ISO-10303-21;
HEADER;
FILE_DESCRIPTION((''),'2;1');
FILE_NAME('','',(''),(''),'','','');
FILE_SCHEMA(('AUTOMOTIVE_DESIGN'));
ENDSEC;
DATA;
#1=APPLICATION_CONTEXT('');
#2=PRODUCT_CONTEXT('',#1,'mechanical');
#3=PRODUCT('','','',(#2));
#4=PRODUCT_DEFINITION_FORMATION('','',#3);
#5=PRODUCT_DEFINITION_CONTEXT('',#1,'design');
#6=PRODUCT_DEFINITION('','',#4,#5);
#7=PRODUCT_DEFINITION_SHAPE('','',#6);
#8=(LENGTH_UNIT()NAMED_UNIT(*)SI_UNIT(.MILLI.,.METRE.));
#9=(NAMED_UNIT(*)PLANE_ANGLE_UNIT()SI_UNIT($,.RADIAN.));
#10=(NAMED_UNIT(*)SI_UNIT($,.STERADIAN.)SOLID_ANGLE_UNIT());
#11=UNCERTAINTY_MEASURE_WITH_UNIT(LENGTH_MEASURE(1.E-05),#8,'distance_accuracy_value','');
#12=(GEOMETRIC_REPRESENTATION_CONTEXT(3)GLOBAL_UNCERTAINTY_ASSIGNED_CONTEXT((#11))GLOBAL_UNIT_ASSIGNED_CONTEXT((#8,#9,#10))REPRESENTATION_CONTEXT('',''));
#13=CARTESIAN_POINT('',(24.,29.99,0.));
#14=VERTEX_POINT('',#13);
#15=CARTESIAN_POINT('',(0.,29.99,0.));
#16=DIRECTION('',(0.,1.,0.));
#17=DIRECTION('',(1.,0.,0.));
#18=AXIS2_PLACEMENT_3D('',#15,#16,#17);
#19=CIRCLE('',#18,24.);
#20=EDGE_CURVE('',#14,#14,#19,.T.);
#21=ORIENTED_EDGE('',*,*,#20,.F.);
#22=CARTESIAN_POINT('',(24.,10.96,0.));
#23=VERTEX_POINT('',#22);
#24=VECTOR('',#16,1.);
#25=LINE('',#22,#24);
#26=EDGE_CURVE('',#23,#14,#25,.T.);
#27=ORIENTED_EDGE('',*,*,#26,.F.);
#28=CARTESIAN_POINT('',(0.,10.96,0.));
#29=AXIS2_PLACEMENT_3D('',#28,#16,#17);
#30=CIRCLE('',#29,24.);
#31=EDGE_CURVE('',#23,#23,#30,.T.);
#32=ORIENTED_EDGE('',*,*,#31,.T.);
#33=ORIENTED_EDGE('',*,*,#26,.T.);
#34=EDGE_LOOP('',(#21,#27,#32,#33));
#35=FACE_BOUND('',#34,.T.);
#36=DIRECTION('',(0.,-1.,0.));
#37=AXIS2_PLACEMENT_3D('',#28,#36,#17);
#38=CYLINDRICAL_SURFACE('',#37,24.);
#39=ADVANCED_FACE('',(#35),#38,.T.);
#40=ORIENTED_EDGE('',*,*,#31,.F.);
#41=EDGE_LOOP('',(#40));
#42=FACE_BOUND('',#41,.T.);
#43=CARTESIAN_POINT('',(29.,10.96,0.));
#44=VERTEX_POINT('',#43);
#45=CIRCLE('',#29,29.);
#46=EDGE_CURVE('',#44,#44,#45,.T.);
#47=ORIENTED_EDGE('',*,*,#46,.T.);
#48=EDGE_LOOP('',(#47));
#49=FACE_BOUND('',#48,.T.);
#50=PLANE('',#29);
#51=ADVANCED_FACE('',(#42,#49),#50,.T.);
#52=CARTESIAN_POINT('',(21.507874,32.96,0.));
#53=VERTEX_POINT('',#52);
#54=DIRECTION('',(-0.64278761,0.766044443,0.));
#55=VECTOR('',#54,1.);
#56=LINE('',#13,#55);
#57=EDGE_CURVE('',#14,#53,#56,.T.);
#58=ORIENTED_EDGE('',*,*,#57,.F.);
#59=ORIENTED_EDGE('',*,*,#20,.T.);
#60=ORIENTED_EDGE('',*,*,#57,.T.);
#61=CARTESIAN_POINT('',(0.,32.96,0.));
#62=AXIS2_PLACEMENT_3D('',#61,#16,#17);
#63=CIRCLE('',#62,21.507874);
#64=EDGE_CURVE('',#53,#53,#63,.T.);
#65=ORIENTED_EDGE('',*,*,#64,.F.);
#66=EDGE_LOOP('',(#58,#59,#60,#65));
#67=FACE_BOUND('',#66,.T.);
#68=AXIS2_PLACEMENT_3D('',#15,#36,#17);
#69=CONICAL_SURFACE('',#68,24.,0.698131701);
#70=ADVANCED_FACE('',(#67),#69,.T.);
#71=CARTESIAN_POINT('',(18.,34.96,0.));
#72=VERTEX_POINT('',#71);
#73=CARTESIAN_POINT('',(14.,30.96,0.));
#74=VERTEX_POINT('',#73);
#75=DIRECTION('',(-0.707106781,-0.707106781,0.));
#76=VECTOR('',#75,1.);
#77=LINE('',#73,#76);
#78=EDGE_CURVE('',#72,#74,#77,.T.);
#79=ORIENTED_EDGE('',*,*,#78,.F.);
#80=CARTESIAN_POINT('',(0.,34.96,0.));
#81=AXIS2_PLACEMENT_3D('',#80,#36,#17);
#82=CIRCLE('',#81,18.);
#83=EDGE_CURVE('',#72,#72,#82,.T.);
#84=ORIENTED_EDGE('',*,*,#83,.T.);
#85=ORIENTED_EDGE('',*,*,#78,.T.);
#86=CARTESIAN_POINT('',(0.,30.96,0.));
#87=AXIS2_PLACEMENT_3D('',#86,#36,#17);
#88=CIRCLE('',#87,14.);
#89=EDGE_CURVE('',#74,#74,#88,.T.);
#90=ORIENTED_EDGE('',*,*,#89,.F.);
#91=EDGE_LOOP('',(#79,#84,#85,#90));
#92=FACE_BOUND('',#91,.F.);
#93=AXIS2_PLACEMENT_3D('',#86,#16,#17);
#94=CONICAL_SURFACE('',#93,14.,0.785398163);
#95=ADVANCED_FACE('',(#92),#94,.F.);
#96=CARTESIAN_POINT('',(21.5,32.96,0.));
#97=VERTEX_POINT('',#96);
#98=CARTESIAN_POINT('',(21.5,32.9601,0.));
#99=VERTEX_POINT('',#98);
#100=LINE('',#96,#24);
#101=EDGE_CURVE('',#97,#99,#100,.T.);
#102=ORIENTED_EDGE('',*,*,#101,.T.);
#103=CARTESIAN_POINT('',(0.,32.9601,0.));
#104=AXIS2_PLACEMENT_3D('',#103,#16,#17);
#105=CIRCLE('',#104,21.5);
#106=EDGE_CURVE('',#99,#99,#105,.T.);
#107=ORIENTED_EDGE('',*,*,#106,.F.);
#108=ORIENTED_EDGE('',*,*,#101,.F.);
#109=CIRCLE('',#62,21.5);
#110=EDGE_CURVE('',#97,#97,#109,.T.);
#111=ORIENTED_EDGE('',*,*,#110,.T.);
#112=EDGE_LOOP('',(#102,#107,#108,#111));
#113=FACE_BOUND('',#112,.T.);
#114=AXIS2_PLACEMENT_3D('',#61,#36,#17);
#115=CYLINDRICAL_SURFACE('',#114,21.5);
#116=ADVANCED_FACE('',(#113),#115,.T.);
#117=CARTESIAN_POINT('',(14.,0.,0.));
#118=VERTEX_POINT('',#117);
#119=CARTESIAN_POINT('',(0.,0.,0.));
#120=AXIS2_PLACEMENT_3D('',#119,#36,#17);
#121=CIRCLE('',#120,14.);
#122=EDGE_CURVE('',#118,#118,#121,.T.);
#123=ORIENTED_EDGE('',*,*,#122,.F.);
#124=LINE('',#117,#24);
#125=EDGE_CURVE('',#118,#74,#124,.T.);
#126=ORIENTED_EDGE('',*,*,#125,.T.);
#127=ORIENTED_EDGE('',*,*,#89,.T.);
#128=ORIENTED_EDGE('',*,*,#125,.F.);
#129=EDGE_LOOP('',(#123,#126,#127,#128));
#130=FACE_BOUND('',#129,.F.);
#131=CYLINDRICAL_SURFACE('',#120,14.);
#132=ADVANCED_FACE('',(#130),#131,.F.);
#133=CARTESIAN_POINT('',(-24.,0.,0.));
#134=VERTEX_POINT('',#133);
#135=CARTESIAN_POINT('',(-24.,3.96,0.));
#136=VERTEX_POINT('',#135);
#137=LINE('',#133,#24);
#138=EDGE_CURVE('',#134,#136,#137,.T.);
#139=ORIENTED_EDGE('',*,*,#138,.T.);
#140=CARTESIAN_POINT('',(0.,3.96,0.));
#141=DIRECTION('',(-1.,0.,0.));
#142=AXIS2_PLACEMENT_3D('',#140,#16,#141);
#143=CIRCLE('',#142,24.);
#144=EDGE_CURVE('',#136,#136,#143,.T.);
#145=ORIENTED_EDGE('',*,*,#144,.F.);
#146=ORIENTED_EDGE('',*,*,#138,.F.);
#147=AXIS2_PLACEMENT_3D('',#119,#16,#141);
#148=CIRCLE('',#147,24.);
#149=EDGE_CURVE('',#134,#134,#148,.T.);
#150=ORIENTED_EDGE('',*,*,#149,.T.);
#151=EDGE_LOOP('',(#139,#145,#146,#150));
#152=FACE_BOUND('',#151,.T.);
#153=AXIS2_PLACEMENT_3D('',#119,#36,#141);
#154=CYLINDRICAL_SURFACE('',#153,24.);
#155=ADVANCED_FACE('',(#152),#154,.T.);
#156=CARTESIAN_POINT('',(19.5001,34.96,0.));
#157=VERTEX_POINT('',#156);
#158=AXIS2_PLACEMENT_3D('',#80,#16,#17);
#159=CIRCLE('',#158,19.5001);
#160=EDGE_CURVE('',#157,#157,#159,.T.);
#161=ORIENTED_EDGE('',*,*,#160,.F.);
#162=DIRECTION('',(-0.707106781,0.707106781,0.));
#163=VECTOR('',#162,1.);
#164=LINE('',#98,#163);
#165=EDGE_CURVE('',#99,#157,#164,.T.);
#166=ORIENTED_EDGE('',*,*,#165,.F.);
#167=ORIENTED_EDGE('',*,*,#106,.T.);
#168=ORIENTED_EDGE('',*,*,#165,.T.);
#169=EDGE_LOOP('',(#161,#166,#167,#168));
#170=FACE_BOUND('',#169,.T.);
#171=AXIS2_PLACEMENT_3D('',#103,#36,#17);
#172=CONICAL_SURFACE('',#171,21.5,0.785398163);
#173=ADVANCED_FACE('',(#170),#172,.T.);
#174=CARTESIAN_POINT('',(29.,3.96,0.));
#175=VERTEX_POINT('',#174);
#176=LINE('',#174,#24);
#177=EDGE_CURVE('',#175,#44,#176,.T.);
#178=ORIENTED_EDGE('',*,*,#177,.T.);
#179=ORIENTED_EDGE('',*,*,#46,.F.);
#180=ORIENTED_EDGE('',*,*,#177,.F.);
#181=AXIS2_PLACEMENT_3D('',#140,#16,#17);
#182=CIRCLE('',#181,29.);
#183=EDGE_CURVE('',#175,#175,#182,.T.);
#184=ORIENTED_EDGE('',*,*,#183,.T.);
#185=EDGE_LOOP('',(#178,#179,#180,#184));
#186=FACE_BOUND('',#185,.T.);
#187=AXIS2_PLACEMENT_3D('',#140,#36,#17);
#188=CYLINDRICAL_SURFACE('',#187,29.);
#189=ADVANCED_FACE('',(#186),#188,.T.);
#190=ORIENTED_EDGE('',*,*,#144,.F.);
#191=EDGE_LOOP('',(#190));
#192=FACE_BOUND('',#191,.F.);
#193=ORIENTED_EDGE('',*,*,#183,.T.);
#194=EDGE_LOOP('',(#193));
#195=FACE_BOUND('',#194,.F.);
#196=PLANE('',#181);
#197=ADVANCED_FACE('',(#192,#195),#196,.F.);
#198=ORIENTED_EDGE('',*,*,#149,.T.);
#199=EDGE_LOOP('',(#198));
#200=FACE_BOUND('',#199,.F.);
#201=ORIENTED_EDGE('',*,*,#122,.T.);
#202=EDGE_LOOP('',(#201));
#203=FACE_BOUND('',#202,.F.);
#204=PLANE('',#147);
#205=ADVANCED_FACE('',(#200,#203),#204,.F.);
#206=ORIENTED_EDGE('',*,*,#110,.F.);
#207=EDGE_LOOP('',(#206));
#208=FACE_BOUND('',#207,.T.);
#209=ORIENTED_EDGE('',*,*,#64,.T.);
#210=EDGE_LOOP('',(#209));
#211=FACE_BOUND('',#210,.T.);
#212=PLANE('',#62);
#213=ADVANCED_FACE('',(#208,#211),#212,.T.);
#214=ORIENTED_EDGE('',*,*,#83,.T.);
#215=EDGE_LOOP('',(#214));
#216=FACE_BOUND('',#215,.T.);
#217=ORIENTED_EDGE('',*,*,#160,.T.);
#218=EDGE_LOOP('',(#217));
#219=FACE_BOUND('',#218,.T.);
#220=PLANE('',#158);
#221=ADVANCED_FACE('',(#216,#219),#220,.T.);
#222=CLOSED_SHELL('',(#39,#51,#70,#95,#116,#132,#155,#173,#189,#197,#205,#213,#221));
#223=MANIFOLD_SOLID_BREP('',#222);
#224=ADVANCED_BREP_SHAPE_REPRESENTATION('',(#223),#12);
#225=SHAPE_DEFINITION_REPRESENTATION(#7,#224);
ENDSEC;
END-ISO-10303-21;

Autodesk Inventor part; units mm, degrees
ref_plane "YZ Plane" through (0, 0, 0) normal (1, 0, 0) x (0, 1, 0)
ref_plane "XZ Plane" through (0, 0, 0) normal (0, 1, 0) x (-1, 0, 0)
ref_plane "XY Plane" through (0, 0, 0) normal (0, 0, 1) x (1, 0, 0)
sketch "Sketch1" plane through (0, 0, 0) normal (0, 1, 0) x (-1, 0, 0)
  circle A0 centre (0, 0) radius 24
  dimension "d0" = 48
extrude "Extrusion1" add sketch "Sketch1" along normal blind 3.96
sketch "Sketch2" plane through (0, 3.96, 0) normal (0, 1, 0) x (1, 0, 0)
  circle A0 centre (0, 0) radius 29
  dimension "d3" = 58
extrude "Extrusion2" add sketch "Sketch2" along normal blind 7
sketch "Sketch3" plane through (0, 10.96, 0) normal (0, 1, 0) x (1, 0, 0)
  circle A0 centre (0, 0) radius 24
  dimension "d6" = 48
extrude "Extrusion3" add sketch "Sketch3" along normal blind 22
sketch "Sketch4" plane through (0, 32.96, 0) normal (0, 1, 0) x (1, 0, 0)
  circle A0 centre (0, 0) radius 21.5
  dimension "d9" = 43
extrude "Extrusion5" add sketch "Sketch4" along normal blind 2
chamfer "Chamfer1" distance 2.97 angle 40 1 edges at (-24, 32.96, 0) measured on face at (23.9222, 25.6267, 1.9312)
chamfer "Chamfer2" distance 2 angle 45 1 edges at (-21.5, 34.96, 0)
sketch "Sketch7" plane through (0, 0, 0) normal (0, -1, 0) x (1, 0, 0)
  circle A0 centre (0, 0) radius 14
  dimension "d22" = 28
extrude "Extrusion6" cut sketch "Sketch7" against normal through all
chamfer "Chamfer3" distance 4 angle 45 1 edges at (-14, 34.96, 0)
properties part number "00.32.005 \"Bushing\"" material "Steel"
